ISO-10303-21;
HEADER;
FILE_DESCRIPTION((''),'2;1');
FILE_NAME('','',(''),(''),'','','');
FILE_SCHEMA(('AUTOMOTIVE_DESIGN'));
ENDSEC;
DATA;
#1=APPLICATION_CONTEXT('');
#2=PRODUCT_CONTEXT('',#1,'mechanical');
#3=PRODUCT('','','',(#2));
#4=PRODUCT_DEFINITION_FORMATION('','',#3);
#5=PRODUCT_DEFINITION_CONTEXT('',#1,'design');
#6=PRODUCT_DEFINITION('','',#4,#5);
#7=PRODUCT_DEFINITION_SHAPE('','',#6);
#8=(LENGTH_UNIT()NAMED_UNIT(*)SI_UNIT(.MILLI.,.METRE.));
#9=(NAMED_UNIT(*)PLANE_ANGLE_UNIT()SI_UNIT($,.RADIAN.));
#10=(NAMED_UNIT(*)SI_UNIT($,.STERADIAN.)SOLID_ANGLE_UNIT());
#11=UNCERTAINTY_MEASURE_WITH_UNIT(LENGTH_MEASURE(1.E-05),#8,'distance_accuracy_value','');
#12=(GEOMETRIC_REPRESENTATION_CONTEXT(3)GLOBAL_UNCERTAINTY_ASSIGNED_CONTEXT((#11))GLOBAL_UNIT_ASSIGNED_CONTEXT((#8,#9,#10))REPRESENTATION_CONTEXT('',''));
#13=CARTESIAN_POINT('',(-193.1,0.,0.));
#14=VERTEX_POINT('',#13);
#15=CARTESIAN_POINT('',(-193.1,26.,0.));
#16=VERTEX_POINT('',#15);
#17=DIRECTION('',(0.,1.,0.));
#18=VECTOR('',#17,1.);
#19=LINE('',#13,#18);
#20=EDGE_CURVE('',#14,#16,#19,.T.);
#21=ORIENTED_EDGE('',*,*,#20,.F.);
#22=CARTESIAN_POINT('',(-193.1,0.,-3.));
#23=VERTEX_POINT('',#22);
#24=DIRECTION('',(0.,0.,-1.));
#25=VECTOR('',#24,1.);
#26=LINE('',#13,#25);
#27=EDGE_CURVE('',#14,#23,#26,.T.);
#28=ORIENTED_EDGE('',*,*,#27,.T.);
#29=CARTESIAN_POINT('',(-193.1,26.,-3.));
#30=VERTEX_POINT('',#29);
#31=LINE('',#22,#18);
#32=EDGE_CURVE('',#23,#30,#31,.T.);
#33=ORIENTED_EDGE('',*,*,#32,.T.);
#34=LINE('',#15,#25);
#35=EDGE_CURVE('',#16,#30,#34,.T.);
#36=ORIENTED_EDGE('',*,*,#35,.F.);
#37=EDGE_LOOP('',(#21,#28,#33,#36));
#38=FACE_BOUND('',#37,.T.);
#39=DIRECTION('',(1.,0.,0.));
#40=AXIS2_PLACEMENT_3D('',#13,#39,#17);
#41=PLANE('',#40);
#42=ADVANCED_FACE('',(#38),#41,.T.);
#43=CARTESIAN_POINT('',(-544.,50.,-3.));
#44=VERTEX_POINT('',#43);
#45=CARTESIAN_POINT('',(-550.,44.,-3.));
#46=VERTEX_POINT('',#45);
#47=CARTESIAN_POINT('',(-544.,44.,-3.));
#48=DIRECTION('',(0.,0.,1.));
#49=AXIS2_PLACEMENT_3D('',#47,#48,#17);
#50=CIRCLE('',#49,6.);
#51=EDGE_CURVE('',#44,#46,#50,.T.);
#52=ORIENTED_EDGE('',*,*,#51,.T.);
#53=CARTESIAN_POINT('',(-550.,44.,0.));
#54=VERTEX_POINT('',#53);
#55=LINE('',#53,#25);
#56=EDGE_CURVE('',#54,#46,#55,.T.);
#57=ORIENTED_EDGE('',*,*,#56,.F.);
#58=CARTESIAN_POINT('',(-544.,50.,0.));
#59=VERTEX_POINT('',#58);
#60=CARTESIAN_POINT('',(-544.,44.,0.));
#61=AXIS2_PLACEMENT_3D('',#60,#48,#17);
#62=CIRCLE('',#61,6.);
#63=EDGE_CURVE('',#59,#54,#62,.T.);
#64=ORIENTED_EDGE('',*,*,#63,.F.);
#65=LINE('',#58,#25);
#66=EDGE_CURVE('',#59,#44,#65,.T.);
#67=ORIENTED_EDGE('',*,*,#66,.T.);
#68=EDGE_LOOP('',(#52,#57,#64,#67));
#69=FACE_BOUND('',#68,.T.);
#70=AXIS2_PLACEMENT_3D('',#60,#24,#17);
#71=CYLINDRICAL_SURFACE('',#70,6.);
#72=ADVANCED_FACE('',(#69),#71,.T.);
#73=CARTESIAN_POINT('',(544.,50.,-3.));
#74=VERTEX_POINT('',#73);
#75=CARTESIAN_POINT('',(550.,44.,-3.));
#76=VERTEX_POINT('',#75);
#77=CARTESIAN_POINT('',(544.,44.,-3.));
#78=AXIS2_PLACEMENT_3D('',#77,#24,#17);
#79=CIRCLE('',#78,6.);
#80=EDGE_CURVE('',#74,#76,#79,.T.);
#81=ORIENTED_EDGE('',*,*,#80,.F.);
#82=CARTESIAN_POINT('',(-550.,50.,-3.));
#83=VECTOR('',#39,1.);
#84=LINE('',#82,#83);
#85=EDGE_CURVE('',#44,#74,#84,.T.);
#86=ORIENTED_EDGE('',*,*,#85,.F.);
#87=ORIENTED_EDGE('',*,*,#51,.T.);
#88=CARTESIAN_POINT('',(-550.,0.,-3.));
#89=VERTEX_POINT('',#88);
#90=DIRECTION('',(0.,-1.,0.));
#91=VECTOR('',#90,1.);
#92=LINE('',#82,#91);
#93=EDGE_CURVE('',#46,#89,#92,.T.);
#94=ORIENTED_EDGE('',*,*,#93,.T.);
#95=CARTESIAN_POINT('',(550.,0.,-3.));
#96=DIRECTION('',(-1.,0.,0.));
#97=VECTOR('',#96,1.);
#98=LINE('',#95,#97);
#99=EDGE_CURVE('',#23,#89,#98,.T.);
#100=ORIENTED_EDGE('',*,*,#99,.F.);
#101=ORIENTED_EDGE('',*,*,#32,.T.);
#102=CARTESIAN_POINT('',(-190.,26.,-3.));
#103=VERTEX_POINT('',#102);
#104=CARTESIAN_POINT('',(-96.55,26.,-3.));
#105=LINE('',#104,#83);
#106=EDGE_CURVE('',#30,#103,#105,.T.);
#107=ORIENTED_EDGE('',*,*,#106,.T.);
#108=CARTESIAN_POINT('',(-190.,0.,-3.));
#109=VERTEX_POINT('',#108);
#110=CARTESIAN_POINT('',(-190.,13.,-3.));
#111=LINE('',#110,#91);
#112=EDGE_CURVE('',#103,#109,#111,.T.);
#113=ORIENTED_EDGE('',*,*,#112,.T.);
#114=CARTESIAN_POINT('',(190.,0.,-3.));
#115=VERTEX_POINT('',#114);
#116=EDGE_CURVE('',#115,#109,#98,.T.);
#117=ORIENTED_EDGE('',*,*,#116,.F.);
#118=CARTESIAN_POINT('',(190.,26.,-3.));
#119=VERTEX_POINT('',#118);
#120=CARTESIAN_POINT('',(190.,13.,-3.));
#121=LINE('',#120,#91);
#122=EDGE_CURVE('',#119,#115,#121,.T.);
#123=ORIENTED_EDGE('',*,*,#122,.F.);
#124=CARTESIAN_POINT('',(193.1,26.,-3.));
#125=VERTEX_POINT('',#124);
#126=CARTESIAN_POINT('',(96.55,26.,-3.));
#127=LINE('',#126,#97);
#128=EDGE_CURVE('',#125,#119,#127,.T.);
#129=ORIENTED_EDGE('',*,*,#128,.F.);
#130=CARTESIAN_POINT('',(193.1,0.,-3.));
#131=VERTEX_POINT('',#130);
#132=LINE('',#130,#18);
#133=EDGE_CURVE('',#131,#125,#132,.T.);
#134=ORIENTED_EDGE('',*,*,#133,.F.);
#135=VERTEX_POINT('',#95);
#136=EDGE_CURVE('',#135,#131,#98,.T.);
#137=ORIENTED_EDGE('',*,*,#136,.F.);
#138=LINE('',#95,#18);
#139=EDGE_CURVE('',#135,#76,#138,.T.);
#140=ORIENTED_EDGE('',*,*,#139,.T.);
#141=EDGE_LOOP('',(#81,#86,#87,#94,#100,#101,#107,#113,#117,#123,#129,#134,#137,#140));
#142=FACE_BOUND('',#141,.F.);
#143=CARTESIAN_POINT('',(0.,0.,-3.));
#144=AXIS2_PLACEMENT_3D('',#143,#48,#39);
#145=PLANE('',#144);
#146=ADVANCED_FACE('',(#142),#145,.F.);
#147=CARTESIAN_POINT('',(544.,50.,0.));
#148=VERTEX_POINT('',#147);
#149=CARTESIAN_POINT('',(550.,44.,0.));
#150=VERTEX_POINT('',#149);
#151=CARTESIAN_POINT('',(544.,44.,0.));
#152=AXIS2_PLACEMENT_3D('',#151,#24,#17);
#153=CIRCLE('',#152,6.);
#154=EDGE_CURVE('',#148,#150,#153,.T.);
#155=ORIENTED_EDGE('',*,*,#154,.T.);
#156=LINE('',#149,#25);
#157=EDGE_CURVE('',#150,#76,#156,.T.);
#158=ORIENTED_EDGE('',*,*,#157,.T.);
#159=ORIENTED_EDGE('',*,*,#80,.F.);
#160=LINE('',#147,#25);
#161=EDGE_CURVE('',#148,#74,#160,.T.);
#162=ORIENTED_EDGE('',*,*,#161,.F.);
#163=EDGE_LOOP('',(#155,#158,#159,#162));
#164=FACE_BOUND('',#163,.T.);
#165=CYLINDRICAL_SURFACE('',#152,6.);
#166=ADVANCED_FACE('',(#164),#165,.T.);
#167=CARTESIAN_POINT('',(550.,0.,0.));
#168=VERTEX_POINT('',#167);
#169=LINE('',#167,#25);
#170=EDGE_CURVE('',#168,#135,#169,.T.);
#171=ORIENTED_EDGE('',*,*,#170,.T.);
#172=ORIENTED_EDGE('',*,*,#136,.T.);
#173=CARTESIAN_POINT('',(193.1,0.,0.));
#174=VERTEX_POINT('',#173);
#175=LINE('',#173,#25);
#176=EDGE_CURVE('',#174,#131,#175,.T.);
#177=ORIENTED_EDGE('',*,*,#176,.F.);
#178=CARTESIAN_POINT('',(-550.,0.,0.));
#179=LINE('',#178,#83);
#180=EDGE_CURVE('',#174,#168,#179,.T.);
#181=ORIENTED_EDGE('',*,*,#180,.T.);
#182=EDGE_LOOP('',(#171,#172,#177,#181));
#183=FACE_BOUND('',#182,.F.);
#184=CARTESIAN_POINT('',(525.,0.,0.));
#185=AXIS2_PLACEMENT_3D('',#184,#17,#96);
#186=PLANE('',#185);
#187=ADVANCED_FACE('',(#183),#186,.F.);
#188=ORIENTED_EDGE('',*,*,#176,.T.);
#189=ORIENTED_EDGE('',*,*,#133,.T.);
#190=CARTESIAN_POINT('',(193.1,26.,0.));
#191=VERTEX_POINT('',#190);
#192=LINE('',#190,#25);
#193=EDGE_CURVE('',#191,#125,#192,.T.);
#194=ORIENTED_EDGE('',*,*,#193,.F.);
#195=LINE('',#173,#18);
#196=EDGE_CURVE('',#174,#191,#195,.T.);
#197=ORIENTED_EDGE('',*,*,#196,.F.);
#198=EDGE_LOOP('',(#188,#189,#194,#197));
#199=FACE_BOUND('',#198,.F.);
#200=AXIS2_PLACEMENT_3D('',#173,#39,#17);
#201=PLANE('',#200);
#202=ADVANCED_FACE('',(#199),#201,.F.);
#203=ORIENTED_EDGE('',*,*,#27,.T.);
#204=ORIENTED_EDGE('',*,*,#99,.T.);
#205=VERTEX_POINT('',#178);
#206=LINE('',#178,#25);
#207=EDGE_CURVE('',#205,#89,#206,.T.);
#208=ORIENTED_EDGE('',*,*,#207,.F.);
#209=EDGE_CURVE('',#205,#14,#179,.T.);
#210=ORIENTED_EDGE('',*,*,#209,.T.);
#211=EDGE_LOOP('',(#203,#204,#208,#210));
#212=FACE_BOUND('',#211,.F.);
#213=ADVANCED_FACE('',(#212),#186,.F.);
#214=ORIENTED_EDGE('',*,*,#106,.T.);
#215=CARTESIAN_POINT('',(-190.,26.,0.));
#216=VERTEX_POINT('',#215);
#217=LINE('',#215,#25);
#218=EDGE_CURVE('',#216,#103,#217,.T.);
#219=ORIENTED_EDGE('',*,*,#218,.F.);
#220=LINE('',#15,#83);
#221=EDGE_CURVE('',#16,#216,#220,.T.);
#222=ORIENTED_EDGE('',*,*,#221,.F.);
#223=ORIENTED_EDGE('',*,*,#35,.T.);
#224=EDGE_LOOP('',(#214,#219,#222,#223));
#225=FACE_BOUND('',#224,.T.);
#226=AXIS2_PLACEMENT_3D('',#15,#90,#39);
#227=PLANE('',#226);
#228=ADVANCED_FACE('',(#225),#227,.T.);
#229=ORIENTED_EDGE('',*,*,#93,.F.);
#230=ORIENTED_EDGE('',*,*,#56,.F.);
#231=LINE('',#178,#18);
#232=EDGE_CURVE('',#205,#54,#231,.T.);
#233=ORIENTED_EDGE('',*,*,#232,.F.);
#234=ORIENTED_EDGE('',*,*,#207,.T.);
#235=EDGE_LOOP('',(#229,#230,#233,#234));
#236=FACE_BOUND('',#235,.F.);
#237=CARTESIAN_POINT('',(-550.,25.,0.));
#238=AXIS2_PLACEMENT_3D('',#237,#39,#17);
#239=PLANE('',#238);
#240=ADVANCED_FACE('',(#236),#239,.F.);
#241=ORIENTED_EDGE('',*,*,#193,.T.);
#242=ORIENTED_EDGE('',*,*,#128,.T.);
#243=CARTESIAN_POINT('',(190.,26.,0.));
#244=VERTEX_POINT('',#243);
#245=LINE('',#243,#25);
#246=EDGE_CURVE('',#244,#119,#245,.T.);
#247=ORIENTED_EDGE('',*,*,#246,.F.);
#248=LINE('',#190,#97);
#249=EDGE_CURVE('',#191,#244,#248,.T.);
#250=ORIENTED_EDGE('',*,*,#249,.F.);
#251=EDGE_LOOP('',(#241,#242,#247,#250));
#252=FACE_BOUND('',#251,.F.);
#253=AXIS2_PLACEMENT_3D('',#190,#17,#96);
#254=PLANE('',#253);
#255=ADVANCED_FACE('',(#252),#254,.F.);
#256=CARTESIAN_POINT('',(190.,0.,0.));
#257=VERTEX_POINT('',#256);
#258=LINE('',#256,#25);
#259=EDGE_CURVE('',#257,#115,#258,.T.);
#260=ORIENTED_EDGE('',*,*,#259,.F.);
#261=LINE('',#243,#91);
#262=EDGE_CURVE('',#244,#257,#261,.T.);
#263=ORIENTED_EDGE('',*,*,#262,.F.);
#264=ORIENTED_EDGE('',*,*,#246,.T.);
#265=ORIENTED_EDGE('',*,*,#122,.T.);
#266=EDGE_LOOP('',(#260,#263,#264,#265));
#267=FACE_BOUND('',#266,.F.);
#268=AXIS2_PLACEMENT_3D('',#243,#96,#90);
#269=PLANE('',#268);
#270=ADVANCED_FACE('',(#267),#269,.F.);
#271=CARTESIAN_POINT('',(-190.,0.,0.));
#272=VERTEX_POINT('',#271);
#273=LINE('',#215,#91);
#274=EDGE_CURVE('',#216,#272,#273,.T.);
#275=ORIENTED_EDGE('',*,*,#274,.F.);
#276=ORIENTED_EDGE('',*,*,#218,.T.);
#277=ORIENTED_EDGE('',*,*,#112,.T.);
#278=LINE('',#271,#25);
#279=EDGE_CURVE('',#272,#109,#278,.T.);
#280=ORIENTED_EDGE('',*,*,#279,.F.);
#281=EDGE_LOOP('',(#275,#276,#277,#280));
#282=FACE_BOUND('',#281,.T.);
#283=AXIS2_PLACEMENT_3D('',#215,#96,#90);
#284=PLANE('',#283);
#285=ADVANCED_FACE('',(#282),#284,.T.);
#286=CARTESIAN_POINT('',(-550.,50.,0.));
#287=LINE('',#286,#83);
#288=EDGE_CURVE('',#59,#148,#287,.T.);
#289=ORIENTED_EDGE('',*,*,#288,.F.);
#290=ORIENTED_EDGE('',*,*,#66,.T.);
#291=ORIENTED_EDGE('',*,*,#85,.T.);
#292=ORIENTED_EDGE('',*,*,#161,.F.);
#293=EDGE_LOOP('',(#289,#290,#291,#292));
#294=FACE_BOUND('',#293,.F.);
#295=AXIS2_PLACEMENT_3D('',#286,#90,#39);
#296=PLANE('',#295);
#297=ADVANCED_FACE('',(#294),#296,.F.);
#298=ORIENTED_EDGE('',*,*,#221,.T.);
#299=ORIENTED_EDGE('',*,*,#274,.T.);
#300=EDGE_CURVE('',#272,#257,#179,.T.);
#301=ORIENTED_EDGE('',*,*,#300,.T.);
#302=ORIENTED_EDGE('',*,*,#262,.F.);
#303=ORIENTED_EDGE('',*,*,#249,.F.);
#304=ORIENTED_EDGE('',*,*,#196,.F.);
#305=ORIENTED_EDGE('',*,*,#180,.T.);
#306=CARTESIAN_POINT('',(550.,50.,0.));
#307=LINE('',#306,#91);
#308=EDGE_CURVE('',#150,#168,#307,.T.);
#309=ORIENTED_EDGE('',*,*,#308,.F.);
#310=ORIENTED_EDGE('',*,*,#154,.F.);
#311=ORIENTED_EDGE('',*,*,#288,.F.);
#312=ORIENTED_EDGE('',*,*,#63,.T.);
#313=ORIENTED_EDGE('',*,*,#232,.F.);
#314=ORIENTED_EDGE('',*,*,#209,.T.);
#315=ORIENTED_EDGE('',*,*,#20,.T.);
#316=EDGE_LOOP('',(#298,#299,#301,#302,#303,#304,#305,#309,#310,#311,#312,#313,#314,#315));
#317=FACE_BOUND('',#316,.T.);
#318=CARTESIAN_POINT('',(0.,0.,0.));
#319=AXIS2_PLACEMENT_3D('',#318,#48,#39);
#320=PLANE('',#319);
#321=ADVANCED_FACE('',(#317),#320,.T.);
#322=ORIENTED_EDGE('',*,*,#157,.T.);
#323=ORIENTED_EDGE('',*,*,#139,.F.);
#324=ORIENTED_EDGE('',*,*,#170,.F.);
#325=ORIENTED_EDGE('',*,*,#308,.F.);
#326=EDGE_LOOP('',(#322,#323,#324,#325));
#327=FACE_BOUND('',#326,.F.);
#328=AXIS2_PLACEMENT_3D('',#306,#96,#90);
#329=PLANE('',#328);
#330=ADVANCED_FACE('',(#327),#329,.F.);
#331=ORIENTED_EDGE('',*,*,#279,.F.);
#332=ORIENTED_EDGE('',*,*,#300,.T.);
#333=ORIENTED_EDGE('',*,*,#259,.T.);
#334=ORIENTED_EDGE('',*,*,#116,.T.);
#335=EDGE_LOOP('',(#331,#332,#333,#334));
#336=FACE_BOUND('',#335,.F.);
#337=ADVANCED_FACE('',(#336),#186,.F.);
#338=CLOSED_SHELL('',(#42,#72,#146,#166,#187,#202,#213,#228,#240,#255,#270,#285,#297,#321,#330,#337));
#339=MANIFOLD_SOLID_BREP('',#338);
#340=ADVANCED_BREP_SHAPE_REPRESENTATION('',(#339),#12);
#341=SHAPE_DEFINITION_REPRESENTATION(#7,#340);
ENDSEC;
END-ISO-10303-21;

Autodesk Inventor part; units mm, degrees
ref_plane "YZ Plane" through (0, 0, 0) normal (1, 0, 0) x (0, 1, 0)
ref_plane "XZ Plane" through (0, 0, 0) normal (0, 1, 0) x (-1, 0, 0)
ref_plane "XY Plane" through (0, 0, 0) normal (0, 0, 1) x (1, 0, 0)
sketch "Sketch1" plane through (0, 0, 0) normal (0, 0, 1) x (1, 0, 0)
  line L0 (-550, 50) -> (550, 50)
  line L1 (550, 50) -> (550, 0)
  line L2 (550, 0) -> (-550, 0)
  line L3 (-550, 0) -> (-550, 50)
  circle A0 centre (-550, 0) radius 25
  circle A1 centre (550, 0) radius 25
  line L4 (550, 0) -> (607.2042, 48)
  line L5 (607.2042, 48) -> (607.2042, 50)
  line L6 (607.2042, 50) -> (550, 50)
  point P0 (0, 0)
  point P1 (0, 0)
  point P2 (-550, 25)
  point P3 (-525, 0)
  point P4 (525, 0)
  point P5 (550, 25)
  point P6 (569.1511, 16.0697)
  dimension "d16" = 50
  dimension "d17" = 1100
  dimension "d18" = 50
  dimension "d19" = 50
  dimension "d32" = 2
  dimension "d33" = 50
extrude "Plate2" add sketch "Sketch1" against normal blind 3 contours L0 L1 A1 L2 A0 L3 | A0 L2 L3 | L1 L2 A1 picked at (-548.1457, 16.4577)
sketch "Sketch2" plane through (0, 0, 0) normal (0, 0, 1) x (1, 0, 0)
  line L0 (-550, 0) -> (550, 0) projected
  line L1 (550, 50) -> (-550, 50) projected
  line L2 (-191.55, 26) -> (-191.55, 202.9149) construction
  line L3 (-193.1, 26) -> (-190, 26)
  line L4 (-190, 26) -> (-190, 0)
  line L5 (-190, 0) -> (-193.1, 0)
  line L6 (-193.1, 0) -> (-193.1, 26)
  line L7 (191.55, 26) -> (191.55, 202.9149) construction
  line L8 (190, 0) -> (193.1, 0)
  line L9 (193.1, 0) -> (193.1, 26)
  line L10 (193.1, 26) -> (190, 26)
  line L11 (190, 26) -> (190, 0)
  line L12 (0, 236.7146) -> (0, 0) construction
  point P0 (0, 0)
  point P1 (190, 0)
  point P2 (-190, 0)
  dimension "d39" = 26
  dimension "d41" = 3.1
  dimension "d43" = 380
extrude "Extrusion1" cut sketch "Sketch2" against normal through all
sketch "Sketch4" plane through (0, 0, 0) normal (0, 0, 1) x (1, 0, 0)
  line L0 (-62.2268, 17.4688) -> (-62.2268, 36.055) construction
  line L1 (-62.2268, 36.055) -> (59.8015, 36.055) construction
  line L2 (59.8015, 36.055) -> (59.8015, 17.4688) construction
  line L3 (59.8015, 17.4688) -> (-62.2268, 17.4688) construction
  point P0 (0, 0)
mark "Mark1"
fillet "Corner Round2" radius 6 2 edges at (-550, 50, -1.5) (550, 50, -1.5)
equation "\"d20\" = Thickness"
equation "\"BendReliefWidth\" = Thickness"
equation "\"BendReliefDepth\" = 0.5 * Thickness"
equation "\"CornerReliefSize\" = 4 * Thickness"
equation "\"MinimumRemnant\" = 2 * Thickness"
equation "\"TransitionRadius\" = BendRadius"
equation "\"JacobiRadiusSize\" = BendRadius"
equation "\"GapSize\" = Thickness"
equation "\"Thickness\" = 3"
equation "\"BendRadius\" = 5"
properties part number "MSC 108 RIB CONE" material "Stainless Steel"
